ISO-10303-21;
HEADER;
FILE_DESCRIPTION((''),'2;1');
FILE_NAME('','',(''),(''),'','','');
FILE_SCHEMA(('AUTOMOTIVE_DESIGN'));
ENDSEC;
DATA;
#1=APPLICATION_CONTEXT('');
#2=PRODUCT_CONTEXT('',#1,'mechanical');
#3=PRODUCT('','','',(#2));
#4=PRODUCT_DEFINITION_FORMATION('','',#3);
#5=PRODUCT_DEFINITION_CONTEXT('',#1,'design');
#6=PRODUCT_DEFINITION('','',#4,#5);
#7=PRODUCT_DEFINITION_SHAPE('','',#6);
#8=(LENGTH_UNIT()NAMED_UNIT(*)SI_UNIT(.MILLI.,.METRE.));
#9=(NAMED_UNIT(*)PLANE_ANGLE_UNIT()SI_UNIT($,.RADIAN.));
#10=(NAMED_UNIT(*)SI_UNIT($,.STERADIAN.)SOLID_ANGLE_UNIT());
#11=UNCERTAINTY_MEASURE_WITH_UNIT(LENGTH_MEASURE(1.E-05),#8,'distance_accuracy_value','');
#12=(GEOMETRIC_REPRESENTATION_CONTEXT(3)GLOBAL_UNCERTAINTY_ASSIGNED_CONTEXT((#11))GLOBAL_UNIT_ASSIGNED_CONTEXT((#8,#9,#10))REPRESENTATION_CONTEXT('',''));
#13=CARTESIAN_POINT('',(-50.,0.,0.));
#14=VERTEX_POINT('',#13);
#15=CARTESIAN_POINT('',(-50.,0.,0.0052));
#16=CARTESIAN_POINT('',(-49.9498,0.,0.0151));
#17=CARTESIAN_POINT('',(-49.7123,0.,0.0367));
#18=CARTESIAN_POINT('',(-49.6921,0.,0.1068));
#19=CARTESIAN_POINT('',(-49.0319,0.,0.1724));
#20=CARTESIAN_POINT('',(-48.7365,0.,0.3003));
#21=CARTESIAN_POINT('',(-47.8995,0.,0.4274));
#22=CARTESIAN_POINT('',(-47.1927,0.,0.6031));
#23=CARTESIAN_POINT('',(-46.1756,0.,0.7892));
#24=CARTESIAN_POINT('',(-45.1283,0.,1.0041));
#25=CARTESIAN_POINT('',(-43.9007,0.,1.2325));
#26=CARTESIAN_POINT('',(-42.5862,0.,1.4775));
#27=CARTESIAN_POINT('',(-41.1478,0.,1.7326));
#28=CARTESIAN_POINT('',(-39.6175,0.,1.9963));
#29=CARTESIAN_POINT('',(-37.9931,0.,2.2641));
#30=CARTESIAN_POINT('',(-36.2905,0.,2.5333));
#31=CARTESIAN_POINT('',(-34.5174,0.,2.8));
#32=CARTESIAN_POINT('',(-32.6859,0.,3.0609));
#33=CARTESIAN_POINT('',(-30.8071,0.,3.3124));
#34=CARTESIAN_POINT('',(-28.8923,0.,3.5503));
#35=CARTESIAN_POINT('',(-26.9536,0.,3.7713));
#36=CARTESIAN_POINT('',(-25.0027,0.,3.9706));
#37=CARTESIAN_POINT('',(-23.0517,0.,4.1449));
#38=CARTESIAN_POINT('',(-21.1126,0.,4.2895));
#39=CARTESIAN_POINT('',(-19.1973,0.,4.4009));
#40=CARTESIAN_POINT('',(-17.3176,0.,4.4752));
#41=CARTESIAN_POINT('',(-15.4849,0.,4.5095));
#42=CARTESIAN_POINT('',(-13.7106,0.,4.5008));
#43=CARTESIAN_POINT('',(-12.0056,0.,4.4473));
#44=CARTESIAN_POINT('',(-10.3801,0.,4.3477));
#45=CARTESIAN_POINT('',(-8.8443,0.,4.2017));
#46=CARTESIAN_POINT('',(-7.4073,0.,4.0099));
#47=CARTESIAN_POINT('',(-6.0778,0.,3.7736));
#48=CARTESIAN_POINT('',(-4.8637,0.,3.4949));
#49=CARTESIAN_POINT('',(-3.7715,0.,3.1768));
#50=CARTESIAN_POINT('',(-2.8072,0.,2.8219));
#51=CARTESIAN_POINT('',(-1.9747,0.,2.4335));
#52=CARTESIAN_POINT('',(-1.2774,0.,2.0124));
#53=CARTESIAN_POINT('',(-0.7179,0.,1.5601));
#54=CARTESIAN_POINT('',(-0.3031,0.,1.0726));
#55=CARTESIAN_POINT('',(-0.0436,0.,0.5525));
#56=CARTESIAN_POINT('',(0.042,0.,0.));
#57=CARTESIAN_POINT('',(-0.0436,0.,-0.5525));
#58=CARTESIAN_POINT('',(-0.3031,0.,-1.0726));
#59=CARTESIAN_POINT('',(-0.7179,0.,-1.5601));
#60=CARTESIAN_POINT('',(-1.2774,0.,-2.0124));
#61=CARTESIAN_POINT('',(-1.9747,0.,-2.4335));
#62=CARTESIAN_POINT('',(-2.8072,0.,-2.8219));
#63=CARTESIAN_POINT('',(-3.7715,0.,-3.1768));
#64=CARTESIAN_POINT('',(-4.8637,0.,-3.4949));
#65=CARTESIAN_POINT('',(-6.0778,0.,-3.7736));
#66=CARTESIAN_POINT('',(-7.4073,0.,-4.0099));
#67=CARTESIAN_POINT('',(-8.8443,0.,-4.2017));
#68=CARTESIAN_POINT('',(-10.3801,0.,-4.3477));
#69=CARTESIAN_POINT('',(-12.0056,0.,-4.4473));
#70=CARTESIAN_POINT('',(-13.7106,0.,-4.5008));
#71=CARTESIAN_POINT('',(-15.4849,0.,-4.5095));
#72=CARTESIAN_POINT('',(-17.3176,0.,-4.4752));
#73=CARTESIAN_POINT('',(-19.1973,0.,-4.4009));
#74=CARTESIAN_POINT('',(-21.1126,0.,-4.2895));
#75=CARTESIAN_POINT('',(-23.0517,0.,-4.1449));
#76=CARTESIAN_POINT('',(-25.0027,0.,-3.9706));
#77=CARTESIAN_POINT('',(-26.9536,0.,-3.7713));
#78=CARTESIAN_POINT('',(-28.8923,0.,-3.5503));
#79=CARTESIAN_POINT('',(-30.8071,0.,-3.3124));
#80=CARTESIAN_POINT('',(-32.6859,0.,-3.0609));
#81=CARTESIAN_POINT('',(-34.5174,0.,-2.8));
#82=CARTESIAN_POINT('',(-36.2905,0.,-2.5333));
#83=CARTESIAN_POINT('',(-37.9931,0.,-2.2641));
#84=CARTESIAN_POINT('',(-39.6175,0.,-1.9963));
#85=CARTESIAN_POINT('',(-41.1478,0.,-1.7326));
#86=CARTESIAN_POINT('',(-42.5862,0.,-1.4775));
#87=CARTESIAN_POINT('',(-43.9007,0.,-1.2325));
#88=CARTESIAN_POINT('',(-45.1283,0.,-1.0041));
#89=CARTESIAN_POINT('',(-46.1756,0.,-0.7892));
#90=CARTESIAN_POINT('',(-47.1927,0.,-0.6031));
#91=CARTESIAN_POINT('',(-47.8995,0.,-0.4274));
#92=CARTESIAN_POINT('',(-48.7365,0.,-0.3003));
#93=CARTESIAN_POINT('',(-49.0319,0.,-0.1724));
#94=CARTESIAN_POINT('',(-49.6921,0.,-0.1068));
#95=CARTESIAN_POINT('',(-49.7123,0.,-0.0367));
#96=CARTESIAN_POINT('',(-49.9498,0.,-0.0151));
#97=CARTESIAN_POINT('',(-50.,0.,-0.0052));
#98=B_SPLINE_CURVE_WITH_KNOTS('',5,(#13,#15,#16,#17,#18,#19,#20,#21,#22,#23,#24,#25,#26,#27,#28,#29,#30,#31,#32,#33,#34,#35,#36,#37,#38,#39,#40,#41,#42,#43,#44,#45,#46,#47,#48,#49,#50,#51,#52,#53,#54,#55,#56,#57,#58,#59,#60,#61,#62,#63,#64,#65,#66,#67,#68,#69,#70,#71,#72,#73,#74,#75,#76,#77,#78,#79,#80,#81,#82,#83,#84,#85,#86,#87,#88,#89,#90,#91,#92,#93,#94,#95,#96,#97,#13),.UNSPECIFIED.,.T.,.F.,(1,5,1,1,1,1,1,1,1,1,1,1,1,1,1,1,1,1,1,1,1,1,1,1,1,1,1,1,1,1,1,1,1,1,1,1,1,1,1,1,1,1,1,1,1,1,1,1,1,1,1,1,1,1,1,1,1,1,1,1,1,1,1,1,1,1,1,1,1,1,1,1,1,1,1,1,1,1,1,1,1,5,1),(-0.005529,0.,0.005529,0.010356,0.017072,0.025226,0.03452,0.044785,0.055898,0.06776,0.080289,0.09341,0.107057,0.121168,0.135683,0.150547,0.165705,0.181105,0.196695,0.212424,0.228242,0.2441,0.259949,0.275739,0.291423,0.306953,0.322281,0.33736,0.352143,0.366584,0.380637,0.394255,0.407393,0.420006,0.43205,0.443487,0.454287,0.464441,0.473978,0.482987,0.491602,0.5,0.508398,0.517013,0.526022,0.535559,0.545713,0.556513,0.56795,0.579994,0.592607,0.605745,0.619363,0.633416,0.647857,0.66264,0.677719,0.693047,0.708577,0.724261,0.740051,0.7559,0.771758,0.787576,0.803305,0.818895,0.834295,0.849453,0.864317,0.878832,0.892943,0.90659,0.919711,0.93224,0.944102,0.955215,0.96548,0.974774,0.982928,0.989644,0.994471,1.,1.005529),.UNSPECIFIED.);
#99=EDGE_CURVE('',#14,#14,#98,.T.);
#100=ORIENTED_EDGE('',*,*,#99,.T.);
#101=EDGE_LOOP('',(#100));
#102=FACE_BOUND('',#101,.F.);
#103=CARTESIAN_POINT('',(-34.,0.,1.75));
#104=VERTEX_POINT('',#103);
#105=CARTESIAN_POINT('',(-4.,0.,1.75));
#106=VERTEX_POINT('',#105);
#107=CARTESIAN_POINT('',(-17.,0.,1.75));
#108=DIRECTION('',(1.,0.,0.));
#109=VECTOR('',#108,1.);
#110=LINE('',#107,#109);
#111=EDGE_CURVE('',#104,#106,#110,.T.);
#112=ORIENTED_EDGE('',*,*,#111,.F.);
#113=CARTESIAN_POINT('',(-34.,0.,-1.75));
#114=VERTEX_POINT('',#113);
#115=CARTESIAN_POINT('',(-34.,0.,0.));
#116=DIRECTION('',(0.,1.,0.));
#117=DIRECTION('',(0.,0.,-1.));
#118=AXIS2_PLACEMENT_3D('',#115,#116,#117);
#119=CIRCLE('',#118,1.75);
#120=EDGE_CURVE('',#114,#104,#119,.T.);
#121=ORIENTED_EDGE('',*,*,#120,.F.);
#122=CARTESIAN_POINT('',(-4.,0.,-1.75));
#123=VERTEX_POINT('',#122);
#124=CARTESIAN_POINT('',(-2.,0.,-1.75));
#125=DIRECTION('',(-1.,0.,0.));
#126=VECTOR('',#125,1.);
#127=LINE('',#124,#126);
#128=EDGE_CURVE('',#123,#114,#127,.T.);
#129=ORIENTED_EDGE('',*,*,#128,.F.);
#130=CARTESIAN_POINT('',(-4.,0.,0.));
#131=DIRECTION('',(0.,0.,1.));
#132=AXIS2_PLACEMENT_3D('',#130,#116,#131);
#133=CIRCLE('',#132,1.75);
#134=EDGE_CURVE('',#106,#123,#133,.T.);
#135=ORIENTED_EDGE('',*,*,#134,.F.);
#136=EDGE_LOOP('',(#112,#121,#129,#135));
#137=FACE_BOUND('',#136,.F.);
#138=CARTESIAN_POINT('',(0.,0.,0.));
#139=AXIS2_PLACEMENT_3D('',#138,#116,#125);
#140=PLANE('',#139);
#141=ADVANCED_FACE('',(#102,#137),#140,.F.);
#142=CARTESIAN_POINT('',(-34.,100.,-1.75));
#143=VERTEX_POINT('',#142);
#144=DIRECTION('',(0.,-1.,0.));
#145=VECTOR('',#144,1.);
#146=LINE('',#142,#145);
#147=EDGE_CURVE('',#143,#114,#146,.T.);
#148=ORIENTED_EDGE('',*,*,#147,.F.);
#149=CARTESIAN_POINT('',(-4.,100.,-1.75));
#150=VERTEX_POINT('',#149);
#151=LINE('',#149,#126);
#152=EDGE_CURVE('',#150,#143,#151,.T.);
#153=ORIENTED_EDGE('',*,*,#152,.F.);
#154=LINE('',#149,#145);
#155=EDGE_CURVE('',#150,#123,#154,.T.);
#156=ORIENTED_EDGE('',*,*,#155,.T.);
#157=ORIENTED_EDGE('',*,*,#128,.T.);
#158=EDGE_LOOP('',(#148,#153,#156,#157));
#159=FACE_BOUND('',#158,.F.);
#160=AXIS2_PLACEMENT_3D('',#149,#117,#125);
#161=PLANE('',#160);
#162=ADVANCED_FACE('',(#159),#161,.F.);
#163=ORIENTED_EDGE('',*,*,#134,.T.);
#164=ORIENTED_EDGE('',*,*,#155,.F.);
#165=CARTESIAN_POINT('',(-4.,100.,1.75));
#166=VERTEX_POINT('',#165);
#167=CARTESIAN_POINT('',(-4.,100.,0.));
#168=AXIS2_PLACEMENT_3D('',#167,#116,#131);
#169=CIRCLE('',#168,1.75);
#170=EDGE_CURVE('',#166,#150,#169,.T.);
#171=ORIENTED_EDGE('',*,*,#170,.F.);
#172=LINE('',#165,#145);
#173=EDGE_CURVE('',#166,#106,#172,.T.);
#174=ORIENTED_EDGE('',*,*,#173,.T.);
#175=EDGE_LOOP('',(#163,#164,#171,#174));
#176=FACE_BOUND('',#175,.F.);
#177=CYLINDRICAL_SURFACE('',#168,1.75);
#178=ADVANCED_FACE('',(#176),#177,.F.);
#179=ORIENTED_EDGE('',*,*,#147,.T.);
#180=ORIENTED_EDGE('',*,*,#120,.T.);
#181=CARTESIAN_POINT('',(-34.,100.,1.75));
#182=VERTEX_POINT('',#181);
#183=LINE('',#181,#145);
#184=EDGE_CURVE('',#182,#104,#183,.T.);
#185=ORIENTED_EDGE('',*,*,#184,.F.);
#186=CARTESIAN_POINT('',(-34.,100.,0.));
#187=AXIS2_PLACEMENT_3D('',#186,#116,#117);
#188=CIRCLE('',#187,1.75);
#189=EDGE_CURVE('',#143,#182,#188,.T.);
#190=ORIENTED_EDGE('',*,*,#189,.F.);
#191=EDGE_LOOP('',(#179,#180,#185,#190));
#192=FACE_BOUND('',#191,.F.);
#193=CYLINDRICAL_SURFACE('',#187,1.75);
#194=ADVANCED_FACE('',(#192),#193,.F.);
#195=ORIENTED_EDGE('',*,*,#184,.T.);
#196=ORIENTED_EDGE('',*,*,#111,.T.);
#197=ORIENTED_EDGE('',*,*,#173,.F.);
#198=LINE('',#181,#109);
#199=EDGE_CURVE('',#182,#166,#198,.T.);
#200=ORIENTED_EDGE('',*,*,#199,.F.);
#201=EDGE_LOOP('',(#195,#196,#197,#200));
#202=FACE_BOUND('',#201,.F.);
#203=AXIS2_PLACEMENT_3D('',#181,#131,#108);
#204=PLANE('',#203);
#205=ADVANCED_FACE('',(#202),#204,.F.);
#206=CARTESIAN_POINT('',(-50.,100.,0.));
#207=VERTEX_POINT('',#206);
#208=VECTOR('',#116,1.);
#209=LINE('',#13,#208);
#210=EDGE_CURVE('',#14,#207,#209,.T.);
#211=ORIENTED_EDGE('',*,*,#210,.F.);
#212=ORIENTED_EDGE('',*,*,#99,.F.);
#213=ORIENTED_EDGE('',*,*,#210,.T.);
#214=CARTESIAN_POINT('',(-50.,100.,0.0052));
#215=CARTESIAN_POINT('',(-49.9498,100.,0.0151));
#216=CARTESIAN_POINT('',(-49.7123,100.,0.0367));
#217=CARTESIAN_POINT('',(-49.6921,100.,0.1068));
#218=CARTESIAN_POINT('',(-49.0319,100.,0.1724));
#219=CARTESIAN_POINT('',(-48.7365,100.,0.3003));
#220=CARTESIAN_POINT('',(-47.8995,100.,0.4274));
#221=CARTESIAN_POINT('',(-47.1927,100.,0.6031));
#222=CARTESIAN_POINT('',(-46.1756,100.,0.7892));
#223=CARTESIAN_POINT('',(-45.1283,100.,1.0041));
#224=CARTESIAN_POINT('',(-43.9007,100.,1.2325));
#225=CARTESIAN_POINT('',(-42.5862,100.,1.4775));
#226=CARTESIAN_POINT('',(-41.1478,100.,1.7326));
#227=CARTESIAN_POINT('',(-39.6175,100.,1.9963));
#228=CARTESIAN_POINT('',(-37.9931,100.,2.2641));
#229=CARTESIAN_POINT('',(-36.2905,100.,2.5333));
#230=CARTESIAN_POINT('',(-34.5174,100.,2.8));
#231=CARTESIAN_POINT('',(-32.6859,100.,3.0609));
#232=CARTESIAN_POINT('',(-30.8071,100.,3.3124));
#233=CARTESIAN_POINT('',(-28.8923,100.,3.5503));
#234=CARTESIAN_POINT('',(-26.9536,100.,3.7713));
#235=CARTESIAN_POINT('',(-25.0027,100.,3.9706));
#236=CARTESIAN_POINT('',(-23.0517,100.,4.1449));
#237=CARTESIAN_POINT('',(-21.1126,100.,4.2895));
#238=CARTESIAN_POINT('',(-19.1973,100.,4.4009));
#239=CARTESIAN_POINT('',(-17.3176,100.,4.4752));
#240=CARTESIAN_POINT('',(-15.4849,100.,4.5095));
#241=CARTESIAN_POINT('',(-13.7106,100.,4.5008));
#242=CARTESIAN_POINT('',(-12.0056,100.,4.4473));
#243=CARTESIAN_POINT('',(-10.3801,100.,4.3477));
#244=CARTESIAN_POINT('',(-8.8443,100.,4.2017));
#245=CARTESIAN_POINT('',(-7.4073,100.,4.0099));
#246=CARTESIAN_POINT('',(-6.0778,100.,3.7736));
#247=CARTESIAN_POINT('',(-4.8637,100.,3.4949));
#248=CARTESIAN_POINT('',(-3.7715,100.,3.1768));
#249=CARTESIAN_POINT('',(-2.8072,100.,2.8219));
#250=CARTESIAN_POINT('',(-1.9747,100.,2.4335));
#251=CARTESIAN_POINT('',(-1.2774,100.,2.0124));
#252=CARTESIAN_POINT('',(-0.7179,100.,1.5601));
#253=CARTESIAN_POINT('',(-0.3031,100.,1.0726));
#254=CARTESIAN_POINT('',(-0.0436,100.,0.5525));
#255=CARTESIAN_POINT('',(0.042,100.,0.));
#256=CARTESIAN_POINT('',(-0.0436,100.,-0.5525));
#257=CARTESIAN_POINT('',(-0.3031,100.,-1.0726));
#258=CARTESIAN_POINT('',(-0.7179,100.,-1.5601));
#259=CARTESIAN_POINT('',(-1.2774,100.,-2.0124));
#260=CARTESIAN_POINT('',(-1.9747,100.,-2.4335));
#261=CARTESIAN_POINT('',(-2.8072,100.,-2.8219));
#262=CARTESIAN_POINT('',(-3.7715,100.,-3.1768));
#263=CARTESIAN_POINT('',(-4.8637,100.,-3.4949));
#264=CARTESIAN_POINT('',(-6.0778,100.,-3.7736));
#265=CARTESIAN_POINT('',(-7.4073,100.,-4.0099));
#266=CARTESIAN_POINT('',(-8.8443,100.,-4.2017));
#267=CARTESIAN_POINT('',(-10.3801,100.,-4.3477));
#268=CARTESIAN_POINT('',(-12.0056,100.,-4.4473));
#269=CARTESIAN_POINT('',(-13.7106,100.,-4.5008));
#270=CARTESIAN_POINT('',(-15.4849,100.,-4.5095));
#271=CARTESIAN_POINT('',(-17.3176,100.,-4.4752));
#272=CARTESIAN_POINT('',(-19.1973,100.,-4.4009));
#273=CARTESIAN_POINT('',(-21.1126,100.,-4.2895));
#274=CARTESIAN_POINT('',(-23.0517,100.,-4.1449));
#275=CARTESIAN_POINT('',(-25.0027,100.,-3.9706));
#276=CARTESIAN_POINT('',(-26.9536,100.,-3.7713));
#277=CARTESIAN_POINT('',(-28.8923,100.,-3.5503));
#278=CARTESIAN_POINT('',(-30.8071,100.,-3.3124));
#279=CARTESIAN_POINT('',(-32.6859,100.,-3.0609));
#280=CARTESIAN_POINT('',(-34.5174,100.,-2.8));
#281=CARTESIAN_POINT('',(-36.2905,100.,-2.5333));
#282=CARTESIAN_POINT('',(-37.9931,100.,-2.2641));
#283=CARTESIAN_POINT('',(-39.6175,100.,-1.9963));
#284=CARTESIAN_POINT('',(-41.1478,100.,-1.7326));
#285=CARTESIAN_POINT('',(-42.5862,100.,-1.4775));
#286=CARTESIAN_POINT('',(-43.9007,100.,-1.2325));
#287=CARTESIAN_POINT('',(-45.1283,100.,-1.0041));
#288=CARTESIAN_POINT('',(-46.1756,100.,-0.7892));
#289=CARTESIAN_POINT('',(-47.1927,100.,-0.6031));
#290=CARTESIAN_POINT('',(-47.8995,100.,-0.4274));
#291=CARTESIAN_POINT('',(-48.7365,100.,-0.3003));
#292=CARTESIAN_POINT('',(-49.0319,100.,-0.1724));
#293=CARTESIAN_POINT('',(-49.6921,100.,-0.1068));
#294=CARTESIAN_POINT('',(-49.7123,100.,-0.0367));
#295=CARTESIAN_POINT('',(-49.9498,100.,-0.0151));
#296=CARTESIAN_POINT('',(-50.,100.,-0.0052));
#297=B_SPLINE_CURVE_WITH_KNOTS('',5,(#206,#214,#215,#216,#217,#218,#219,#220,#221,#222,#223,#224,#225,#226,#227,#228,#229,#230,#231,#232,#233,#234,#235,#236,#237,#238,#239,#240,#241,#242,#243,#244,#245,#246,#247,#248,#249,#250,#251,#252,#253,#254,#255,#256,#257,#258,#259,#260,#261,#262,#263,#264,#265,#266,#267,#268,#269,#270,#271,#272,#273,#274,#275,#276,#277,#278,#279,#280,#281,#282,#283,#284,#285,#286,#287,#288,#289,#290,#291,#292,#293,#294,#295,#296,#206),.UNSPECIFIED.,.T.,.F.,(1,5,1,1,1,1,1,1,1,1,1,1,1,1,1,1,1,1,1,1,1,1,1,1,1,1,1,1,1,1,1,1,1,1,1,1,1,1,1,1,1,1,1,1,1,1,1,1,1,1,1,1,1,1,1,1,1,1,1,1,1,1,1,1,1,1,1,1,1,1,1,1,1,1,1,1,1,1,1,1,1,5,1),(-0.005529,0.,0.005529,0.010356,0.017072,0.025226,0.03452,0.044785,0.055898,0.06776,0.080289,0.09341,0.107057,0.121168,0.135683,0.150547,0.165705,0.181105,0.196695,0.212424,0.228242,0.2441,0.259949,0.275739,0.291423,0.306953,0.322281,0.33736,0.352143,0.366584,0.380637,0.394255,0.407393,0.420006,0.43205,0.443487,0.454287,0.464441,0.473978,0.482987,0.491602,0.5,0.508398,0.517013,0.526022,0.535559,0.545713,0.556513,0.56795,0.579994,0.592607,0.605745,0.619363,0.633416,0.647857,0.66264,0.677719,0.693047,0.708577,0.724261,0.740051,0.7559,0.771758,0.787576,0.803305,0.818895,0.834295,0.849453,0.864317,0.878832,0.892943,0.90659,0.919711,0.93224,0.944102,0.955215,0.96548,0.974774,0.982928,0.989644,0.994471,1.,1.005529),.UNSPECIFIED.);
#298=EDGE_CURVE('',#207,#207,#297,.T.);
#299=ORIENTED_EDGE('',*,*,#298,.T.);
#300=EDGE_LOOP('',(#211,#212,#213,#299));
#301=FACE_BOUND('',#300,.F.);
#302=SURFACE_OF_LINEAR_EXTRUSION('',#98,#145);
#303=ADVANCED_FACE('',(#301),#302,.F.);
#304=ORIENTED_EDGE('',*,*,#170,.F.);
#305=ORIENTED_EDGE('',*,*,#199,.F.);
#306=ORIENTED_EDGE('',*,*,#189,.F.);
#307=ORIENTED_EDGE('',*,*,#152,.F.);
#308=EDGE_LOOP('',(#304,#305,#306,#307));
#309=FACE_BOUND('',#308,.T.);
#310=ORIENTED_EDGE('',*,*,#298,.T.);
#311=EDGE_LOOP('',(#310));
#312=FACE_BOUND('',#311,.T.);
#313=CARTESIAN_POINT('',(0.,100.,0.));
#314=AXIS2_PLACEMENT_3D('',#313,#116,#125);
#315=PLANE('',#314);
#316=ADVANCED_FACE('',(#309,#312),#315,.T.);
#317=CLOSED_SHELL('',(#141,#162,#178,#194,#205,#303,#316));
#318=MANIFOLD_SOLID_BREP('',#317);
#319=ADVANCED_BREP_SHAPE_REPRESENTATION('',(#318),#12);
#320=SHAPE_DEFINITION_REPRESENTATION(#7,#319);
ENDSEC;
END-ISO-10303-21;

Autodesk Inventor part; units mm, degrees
ref_plane "YZ Plane" through (0, 0, 0) normal (1, 0, 0) x (0, 1, 0)
ref_plane "XZ Plane" through (0, 0, 0) normal (0, 1, 0) x (-1, 0, 0)
ref_plane "XY Plane" through (0, 0, 0) normal (0, 0, 1) x (1, 0, 0)
sketch "草圖1" plane through (0, 0, 0) normal (0, 1, 0) x (-1, 0, 0)
  spline S0 degree 5 poles (50, 0) (50, 0.0052) (49.9498, 0.0151) (49.7123, 0.0367) (49.6921, 0.1068) (49.0319, 0.1724) (48.7365, 0.3003) (47.8995, 0.4274) (47.1927, 0.6031) (46.1756, 0.7892) (45.1283, 1.0041) (43.9007, 1.2325) (42.5862, 1.4775) (41.1478, 1.7326) (39.6175, 1.9963) (37.9931, 2.2641) (36.2905, 2.5333) (34.5174, 2.8) (32.6859, 3.0609) (30.8071, 3.3124) (28.8923, 3.5503) (26.9536, 3.7713) (25.0027, 3.9706) (23.0517, 4.1449) (21.1126, 4.2895) (19.1973, 4.4009) (17.3176, 4.4752) (15.4849, 4.5095) (13.7106, 4.5008) (12.0056, 4.4473) (10.3801, 4.3477) (8.8443, 4.2017) (7.4073, 4.0099) (6.0778, 3.7736) (4.8637, 3.4949) (3.7715, 3.1768) (2.8072, 2.8219) (1.9747, 2.4335) (1.2774, 2.0124) (0.7179, 1.5601) (0.3031, 1.0726) (0.0436, 0.5525) (-0.042, 0) (0.0436, -0.5525) (0.3031, -1.0726) (0.7179, -1.5601) (1.2774, -2.0124) (1.9747, -2.4335) (2.8072, -2.8219) (3.7715, -3.1768) (4.8637, -3.4949) (6.0778, -3.7736) (7.4073, -4.0099) (8.8443, -4.2017) (10.3801, -4.3477) (12.0056, -4.4473) (13.7106, -4.5008) (15.4849, -4.5095) (17.3176, -4.4752) (19.1973, -4.4009) (21.1126, -4.2895) (23.0517, -4.1449) (25.0027, -3.9706) (26.9536, -3.7713) (28.8923, -3.5503) (30.8071, -3.3124) (32.6859, -3.0609) (34.5174, -2.8) (36.2905, -2.5333) (37.9931, -2.2641) (39.6175, -1.9963) (41.1478, -1.7326) (42.5862, -1.4775) (43.9007, -1.2325) (45.1283, -1.0041) (46.1756, -0.7892) (47.1927, -0.6031) (47.8995, -0.4274) (48.7365, -0.3003) (49.0319, -0.1724) (49.6921, -0.1068) (49.7123, -0.0367) (49.9498, -0.0151) (50, -0.0052) (50, 0) knots 0 0 0 0 0 0 0.005529 0.010356 0.017072 0.025226 0.03452 0.044785 0.055898 0.06776 0.080289 0.09341 0.107057 0.121168 0.135683 0.150547 0.165705 0.181105 0.196695 0.212424 0.228242 0.2441 0.259949 0.275739 0.291423 0.306953 0.322281 0.33736 0.352143 0.366584 0.380637 0.394255 0.407393 0.420006 0.43205 0.443487 0.454287 0.464441 0.473978 0.482987 0.491602 0.5 0.508398 0.517013 0.526022 0.535559 0.545713 0.556513 0.56795 0.579994 0.592607 0.605745 0.619363 0.633416 0.647857 0.66264 0.677719 0.693047 0.708577 0.724261 0.740051 0.7559 0.771758 0.787576 0.803305 0.818895 0.834295 0.849453 0.864317 0.878832 0.892943 0.90659 0.919711 0.93224 0.944102 0.955215 0.96548 0.974774 0.982928 0.989644 0.994471 1 1 1 1 1 1
  point P0 (0, 0)
  point P1 (49.6922, 0.0669)
  point P2 (49.3093, 0.1492)
  point P3 (48.7764, 0.2626)
  point P4 (48.097, 0.4049)
  point P5 (47.2751, 0.5738)
  point P6 (46.316, 0.7666)
  point P7 (45.2254, 0.9803)
  point P8 (44.0102, 1.2119)
  point P9 (42.6776, 1.4579)
  point P10 (41.2362, 1.7151)
  point P11 (39.6947, 1.9804)
  point P12 (38.0624, 2.25)
  point P13 (36.3498, 2.5208)
  point P14 (34.5671, 2.7891)
  point P15 (32.7254, 3.0514)
  point P16 (30.8361, 3.3041)
  point P17 (28.9109, 3.5431)
  point P18 (26.9615, 3.7647)
  point P19 (25, 3.9646)
  point P20 (23.0385, 4.1388)
  point P21 (21.0892, 4.2831)
  point P22 (19.1639, 4.3937)
  point P23 (17.2746, 4.4668)
  point P24 (15.4329, 4.4992)
  point P25 (13.6503, 4.4881)
  point P26 (11.9376, 4.4316)
  point P27 (10.3054, 4.3284)
  point P28 (8.7638, 4.1781)
  point P29 (7.3224, 3.9812)
  point P30 (5.9898, 3.739)
  point P31 (4.7746, 3.4537)
  point P32 (3.684, 3.1279)
  point P33 (2.7249, 2.765)
  point P34 (1.903, 2.3685)
  point P35 (1.2236, 1.942)
  point P36 (0.6907, 1.4891)
  point P37 (0.3078, 1.0128)
  point P38 (0.0771, 0.5158)
  point P39 (0, 0)
  point P40 (0.0771, -0.5158)
  point P41 (0.3078, -1.0128)
  point P42 (0.6907, -1.4891)
  point P43 (1.2236, -1.942)
  point P44 (1.903, -2.3685)
  point P45 (2.7249, -2.765)
  point P46 (3.684, -3.1279)
  point P47 (4.7746, -3.4537)
  point P48 (5.9898, -3.739)
  point P49 (7.3224, -3.9812)
  point P50 (8.7638, -4.1781)
  point P51 (10.3054, -4.3284)
  point P52 (11.9376, -4.4316)
  point P53 (13.6503, -4.4881)
  point P54 (15.4329, -4.4992)
  point P55 (17.2746, -4.4668)
  point P56 (19.1639, -4.3937)
  point P57 (21.0892, -4.2831)
  point P58 (23.0385, -4.1388)
  point P59 (25, -3.9646)
  point P60 (26.9615, -3.7647)
  point P61 (28.9109, -3.5431)
  point P62 (30.8361, -3.3041)
  point P63 (32.7254, -3.0514)
  point P64 (34.5671, -2.7891)
  point P65 (36.3498, -2.5208)
  point P66 (38.0624, -2.25)
  point P67 (39.6947, -1.9804)
  point P68 (41.2362, -1.7151)
  point P69 (42.6776, -1.4579)
  point P70 (44.0102, -1.2119)
  point P71 (45.2254, -0.9803)
  point P72 (46.316, -0.7666)
  point P73 (47.2751, -0.5738)
  point P74 (48.097, -0.4049)
  point P75 (48.7764, -0.2626)
  point P76 (49.3093, -0.1492)
  point P77 (49.6922, -0.0669)
  point P78 (49.923, -0.0168)
extrude "擠出2" add sketch "草圖1" along normal blind 100
sketch "草圖2" plane through (0, 100, 0) normal (0, 1, 0) x (1, 0, 0)
  line L0 (-4, 0) -> (-34, 0) construction
  line L1 (-4, 1.75) -> (-34, 1.75)
  line L2 (-34, -1.75) -> (-4, -1.75)
  arc A0 (-4, -1.75) -> (-4, 1.75) centre (-4, 0) ccw
  arc A1 (-34, 1.75) -> (-34, -1.75) centre (-34, 0) ccw
  point P0 (0, 0)
  point P1 (-19, 0)
  dimension "d4" = 3.5
  dimension "d5" = 4
  dimension "d6" = 30
  dimension "d7" = 19
extrude "擠出3" cut sketch "草圖2" against normal through all
properties part number "0018"
